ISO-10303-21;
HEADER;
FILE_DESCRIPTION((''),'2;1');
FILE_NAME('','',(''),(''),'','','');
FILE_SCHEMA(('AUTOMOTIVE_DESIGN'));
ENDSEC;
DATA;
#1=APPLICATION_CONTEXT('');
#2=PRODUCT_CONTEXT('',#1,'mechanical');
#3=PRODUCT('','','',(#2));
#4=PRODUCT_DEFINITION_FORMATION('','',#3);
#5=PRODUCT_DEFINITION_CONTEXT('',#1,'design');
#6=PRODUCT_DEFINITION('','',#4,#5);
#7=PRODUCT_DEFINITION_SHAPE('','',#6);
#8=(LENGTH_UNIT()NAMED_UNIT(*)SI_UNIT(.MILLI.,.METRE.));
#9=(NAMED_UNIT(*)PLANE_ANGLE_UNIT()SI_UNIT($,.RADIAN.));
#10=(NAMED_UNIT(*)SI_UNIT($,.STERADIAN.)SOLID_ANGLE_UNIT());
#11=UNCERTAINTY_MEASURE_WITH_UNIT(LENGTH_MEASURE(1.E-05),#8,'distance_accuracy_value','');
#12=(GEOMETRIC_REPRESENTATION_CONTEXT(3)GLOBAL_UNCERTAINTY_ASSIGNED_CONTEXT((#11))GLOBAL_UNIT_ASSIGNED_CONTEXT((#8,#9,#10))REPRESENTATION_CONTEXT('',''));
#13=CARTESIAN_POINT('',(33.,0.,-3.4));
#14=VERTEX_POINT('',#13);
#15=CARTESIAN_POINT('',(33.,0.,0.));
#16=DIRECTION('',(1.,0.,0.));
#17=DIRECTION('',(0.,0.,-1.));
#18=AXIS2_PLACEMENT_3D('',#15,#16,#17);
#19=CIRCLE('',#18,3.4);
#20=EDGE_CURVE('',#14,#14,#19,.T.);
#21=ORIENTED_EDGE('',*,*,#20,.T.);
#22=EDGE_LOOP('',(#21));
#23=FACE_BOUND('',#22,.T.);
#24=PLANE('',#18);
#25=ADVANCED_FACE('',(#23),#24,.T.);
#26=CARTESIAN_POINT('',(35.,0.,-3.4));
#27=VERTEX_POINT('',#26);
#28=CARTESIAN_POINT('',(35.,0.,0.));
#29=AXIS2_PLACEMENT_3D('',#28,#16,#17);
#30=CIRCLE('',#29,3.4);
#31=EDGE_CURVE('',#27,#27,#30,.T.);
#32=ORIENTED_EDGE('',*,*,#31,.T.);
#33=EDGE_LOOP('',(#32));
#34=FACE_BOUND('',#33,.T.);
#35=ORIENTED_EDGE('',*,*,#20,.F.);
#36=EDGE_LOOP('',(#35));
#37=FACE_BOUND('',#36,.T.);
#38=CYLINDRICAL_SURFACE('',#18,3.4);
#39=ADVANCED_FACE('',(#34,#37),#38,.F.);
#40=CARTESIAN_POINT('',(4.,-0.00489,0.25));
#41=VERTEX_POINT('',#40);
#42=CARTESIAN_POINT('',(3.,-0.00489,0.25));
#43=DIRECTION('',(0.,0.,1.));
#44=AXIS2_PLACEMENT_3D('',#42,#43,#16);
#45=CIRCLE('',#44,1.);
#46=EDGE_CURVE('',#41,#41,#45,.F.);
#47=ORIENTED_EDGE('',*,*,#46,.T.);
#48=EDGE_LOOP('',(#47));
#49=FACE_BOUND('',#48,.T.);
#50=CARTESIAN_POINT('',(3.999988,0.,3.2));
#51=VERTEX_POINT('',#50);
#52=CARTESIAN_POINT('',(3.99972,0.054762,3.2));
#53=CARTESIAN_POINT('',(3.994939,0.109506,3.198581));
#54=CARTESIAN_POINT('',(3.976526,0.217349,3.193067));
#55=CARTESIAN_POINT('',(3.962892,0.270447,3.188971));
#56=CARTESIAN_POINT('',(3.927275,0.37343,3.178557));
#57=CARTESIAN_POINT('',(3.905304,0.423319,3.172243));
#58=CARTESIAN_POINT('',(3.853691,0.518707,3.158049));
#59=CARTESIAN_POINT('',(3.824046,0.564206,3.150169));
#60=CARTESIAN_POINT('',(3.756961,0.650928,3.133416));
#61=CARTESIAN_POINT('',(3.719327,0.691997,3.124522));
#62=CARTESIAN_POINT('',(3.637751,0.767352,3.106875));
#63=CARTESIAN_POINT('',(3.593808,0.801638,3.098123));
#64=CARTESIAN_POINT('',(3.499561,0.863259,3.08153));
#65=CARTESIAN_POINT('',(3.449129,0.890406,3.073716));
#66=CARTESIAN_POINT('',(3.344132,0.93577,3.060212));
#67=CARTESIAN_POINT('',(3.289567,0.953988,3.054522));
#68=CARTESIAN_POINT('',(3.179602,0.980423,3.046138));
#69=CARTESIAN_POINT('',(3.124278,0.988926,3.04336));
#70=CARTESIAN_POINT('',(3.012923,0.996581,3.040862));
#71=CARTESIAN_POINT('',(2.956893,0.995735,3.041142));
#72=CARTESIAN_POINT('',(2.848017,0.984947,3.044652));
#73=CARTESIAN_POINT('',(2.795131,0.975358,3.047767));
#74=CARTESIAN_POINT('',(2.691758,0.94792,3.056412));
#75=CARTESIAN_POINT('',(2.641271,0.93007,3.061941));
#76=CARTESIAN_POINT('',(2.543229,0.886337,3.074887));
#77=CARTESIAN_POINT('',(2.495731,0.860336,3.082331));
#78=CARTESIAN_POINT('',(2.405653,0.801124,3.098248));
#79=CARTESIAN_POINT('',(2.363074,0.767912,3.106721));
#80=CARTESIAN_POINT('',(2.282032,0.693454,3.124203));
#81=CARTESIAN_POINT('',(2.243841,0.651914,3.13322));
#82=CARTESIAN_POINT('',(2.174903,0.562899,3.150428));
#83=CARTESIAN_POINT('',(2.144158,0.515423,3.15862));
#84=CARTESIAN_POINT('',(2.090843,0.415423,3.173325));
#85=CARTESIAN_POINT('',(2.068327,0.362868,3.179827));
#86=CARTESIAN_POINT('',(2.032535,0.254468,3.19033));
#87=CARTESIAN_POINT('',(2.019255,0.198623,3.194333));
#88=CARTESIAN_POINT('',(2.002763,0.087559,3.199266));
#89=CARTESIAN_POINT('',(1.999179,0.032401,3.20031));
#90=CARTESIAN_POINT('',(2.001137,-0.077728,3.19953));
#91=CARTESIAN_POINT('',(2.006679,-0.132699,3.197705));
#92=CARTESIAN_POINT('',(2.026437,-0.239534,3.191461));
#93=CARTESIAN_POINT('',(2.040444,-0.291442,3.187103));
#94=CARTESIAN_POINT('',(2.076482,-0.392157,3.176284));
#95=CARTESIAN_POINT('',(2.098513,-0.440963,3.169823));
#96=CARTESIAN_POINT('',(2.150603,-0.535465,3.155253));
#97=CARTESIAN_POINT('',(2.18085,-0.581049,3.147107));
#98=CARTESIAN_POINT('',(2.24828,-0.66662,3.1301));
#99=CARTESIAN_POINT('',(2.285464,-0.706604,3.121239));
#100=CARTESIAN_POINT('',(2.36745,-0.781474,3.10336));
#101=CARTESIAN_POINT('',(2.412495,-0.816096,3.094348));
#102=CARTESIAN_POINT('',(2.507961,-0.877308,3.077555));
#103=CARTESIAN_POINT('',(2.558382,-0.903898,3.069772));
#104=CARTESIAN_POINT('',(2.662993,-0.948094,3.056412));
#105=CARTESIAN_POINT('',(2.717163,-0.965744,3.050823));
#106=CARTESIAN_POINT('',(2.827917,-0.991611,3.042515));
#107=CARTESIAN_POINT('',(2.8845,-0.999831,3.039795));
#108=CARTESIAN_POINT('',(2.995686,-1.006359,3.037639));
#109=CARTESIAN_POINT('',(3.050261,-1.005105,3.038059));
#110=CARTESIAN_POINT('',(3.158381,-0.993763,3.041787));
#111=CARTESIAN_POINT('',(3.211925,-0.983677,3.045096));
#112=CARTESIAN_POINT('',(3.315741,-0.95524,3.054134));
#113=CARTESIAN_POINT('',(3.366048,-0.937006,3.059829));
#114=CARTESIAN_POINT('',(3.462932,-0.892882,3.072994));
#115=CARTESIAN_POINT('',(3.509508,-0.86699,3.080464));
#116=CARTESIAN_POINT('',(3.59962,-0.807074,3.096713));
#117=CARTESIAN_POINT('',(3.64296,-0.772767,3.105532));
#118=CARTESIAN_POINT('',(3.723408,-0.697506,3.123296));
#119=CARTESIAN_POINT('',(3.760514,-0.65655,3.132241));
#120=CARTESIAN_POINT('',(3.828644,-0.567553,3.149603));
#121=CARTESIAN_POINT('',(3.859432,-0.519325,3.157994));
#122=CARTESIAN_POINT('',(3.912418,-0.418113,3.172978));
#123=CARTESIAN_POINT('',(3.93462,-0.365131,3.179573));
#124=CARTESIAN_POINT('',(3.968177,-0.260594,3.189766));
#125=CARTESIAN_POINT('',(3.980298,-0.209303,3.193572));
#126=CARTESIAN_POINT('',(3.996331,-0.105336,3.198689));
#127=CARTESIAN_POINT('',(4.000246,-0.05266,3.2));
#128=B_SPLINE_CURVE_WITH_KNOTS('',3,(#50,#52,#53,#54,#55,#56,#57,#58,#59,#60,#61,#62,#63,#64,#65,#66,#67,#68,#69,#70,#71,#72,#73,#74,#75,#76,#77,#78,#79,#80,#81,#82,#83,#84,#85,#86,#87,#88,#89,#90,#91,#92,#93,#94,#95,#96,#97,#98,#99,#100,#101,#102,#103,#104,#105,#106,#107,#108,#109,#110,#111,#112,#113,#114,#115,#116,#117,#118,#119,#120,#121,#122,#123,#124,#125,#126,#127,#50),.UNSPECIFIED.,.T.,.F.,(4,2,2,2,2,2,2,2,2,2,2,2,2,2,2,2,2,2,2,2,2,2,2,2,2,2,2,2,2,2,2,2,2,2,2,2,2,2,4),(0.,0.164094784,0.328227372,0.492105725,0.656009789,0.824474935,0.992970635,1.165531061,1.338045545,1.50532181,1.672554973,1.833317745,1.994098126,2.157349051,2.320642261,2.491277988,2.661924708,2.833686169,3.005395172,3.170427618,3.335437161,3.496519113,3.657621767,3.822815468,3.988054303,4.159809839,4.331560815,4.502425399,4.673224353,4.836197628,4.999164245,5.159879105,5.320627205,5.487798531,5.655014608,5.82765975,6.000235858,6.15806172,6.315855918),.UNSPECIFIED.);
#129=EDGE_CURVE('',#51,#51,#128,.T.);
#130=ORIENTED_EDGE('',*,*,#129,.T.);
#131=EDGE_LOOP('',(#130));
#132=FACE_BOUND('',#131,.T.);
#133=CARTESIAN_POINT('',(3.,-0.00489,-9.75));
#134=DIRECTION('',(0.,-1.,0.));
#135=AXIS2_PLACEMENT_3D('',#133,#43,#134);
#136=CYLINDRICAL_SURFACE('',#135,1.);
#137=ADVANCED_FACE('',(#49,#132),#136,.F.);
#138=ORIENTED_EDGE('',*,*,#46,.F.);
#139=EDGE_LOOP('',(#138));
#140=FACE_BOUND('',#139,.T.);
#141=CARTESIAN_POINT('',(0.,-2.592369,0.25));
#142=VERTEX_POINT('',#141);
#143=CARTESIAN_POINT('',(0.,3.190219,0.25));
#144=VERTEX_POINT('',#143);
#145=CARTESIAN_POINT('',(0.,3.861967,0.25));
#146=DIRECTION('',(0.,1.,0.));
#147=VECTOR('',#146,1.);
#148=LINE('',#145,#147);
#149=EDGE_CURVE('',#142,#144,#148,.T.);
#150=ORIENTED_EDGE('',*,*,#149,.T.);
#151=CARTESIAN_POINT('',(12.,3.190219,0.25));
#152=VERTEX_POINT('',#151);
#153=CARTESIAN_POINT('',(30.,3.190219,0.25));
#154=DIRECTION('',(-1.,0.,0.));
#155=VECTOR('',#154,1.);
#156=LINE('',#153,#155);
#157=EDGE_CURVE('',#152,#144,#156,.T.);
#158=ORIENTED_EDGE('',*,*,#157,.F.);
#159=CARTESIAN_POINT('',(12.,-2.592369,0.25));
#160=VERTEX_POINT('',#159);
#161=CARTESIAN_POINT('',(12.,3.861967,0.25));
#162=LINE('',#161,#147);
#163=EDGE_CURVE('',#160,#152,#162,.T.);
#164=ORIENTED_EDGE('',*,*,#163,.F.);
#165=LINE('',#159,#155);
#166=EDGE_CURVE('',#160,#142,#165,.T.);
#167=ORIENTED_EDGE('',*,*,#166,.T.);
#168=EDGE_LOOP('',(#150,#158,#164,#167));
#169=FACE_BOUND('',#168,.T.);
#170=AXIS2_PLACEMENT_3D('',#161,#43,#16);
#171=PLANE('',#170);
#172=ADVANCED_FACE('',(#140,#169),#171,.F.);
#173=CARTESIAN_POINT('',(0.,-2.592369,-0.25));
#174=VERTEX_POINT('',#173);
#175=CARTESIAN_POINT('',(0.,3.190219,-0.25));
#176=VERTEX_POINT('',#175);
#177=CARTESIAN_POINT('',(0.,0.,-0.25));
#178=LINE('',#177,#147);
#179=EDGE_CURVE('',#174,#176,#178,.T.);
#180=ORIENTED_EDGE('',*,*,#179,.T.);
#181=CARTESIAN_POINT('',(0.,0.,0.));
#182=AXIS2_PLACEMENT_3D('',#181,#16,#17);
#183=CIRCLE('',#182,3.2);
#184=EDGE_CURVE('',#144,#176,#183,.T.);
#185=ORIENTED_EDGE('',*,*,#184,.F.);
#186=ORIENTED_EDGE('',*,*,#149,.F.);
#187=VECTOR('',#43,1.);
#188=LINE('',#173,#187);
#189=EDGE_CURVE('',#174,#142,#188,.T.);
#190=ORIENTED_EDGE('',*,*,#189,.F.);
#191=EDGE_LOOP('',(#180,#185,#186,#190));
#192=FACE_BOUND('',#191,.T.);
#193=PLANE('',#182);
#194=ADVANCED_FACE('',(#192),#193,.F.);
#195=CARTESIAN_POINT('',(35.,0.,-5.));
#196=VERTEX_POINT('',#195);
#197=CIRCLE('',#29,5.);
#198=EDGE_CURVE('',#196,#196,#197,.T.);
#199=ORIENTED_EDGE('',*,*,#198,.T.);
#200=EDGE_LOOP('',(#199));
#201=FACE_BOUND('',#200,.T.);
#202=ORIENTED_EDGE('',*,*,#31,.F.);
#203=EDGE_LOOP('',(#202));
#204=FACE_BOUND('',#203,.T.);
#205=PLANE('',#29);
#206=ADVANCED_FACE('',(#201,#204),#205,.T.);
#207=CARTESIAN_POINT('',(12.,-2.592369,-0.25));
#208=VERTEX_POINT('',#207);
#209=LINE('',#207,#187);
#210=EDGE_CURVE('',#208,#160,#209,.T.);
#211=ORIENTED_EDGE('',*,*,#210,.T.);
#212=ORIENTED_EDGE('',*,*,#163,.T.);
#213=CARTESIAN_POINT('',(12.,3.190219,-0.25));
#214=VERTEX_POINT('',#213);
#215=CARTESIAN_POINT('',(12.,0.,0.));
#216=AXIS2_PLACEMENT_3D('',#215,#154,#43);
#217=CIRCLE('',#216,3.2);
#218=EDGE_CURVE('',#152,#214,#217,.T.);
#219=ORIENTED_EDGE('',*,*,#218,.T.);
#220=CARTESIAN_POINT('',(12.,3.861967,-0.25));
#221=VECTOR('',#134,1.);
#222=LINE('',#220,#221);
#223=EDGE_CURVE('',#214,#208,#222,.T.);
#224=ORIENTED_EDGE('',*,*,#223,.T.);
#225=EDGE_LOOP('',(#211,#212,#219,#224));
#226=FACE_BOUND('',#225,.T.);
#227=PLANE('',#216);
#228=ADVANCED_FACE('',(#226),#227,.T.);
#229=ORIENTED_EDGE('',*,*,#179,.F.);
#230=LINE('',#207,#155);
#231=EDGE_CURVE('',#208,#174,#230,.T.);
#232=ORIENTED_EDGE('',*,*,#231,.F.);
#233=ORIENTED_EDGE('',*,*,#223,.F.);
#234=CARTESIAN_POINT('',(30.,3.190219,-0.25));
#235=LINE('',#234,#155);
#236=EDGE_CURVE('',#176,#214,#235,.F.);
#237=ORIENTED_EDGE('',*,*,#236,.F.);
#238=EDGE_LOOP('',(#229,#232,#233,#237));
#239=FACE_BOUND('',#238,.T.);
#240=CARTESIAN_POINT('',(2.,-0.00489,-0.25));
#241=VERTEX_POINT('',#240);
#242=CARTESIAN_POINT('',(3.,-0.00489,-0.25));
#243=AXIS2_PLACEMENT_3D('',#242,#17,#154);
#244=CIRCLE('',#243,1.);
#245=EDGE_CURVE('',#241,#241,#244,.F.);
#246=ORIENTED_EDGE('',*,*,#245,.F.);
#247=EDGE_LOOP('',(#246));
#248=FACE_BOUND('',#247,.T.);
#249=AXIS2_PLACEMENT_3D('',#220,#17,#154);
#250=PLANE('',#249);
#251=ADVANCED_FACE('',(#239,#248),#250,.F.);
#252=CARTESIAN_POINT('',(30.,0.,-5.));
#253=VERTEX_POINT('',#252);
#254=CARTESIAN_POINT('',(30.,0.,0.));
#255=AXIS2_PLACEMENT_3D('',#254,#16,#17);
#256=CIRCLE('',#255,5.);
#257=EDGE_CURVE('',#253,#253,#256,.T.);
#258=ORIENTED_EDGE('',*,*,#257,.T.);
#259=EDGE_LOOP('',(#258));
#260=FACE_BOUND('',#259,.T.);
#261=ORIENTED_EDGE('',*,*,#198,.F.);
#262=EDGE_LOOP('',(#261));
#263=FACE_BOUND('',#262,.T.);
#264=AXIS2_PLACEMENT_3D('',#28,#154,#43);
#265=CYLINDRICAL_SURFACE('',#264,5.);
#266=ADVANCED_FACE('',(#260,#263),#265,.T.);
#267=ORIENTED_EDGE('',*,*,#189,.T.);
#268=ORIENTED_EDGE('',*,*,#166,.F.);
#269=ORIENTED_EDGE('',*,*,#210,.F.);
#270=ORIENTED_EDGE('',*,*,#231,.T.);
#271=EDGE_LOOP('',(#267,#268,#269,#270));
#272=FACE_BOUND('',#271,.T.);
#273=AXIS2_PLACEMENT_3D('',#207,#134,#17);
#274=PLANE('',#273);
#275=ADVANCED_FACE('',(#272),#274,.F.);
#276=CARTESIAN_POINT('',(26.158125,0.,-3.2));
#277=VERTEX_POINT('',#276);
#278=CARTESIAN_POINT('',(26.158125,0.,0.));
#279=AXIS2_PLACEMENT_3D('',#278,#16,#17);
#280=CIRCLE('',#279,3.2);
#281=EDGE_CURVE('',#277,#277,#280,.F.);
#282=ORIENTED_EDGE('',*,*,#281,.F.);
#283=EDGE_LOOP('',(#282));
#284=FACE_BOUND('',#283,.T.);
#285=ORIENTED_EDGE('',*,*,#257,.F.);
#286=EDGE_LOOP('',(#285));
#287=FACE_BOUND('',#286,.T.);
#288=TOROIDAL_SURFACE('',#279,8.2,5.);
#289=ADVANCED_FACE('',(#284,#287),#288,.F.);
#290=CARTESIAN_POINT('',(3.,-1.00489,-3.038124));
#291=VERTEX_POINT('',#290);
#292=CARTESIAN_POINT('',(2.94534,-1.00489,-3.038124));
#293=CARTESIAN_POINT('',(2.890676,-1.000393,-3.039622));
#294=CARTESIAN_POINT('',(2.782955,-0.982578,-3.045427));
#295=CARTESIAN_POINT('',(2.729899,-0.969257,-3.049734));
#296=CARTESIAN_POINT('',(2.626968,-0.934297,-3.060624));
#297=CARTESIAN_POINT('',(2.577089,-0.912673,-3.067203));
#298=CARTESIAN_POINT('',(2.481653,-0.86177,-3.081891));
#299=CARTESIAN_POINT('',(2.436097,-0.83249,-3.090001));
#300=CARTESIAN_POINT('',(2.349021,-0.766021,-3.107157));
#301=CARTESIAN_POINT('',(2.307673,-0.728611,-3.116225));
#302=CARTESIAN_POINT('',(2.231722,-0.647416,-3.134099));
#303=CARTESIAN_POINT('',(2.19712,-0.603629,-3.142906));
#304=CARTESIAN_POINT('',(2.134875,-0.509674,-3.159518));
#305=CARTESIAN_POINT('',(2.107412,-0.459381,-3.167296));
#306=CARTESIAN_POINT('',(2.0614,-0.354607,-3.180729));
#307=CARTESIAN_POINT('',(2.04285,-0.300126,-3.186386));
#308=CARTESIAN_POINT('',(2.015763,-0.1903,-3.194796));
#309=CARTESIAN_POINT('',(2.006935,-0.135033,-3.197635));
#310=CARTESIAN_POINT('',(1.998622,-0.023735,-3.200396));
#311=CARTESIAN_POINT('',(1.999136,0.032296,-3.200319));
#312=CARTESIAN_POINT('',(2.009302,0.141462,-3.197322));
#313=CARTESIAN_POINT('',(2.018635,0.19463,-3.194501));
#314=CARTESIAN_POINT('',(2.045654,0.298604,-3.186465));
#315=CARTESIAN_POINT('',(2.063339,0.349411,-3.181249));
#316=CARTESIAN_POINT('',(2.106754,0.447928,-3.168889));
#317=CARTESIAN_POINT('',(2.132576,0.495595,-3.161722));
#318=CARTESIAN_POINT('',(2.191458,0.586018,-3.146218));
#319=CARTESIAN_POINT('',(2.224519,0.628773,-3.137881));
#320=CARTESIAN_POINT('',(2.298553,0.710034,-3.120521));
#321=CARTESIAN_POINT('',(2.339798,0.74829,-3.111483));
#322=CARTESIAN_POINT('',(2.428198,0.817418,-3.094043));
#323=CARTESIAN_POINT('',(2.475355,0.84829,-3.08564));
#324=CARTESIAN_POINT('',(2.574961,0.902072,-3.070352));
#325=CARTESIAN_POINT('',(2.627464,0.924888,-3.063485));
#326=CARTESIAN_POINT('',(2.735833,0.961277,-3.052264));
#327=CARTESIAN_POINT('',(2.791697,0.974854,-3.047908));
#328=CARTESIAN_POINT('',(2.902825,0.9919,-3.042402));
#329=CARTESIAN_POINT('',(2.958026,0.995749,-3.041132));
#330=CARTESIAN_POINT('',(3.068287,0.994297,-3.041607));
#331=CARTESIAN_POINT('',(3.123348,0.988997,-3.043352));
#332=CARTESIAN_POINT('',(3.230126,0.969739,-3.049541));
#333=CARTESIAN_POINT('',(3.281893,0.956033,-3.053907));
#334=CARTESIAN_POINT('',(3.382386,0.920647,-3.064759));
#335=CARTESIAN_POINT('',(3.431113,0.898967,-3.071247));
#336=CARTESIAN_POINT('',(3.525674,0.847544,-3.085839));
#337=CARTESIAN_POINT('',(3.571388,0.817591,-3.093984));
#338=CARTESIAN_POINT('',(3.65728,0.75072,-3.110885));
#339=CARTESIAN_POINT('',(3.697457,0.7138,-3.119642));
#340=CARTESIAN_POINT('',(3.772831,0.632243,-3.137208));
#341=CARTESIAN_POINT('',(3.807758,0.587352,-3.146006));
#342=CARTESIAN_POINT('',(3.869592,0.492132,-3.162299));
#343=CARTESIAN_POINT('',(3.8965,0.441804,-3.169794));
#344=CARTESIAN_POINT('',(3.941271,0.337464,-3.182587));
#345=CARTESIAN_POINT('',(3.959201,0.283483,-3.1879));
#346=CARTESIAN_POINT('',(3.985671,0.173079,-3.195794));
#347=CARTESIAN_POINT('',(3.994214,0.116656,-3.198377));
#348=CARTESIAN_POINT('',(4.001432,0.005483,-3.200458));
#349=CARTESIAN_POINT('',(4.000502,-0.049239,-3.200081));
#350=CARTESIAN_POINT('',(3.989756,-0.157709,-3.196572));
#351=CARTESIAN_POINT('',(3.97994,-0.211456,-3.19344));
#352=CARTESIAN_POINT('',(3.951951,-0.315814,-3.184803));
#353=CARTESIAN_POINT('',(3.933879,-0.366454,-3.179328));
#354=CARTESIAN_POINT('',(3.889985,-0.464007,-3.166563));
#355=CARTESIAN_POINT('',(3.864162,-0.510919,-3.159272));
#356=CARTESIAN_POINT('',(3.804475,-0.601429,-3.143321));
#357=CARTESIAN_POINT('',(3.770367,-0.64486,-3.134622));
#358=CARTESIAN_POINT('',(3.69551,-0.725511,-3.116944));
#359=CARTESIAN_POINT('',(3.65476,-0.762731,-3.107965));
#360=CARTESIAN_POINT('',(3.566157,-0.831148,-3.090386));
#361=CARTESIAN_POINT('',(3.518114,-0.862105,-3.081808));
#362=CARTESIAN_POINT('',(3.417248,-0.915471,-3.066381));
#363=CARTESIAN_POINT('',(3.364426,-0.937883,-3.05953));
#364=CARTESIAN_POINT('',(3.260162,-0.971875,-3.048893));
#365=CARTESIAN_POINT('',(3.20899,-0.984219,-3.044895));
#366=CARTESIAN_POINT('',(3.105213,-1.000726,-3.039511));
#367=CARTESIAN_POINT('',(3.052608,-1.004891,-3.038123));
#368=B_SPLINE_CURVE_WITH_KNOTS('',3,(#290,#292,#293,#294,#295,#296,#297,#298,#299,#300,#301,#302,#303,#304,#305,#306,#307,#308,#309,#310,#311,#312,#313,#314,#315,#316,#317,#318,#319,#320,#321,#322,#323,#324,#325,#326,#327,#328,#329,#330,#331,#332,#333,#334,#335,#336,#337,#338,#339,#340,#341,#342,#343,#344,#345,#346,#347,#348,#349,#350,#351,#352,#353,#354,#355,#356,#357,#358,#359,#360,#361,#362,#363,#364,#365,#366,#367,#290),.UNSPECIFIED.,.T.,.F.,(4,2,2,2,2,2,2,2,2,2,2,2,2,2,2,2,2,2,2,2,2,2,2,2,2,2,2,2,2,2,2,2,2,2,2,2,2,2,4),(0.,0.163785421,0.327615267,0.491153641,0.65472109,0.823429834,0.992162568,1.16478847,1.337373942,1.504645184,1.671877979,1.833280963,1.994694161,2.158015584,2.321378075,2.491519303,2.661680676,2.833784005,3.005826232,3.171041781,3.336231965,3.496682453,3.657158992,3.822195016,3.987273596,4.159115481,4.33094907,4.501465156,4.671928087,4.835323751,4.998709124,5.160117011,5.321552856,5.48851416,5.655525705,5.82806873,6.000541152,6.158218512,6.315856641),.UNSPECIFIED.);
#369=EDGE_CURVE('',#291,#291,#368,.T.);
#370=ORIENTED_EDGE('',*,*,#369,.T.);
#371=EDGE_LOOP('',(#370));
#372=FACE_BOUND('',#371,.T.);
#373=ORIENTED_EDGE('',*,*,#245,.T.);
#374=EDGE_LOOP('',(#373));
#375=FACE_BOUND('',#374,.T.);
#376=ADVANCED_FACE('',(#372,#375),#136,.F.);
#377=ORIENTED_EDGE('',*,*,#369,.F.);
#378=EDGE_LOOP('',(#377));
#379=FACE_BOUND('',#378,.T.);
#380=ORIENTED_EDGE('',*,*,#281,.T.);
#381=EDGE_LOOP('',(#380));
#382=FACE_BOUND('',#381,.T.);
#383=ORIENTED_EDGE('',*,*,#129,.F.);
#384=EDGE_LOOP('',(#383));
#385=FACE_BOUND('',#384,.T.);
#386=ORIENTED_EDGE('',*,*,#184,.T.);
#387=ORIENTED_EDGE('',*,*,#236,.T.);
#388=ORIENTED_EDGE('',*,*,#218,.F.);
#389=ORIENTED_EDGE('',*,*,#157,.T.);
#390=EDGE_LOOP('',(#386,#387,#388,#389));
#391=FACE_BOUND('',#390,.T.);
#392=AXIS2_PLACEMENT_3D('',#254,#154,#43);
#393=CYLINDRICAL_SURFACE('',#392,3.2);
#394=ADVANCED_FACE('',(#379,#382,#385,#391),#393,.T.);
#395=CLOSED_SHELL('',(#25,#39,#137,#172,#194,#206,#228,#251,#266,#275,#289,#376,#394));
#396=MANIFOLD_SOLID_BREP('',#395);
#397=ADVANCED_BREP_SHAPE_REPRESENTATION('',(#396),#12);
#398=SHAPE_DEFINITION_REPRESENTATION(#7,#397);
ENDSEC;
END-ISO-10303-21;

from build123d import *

# Parameters (mm, degrees)
SKETCH_1_R               = 3.2
EXTRUDE_1_DEPTH          = 30
SKETCH_2_W               = 0.5
SKETCH_2_H               = 6.454336116
CUT_EXTRUDE_1_DEPTH      = 12
CUT_EXTRUDE_2_DEPTH      = 10
CUT_EXTRUDE_2_DEPTH_BACK = 10
SKETCH_3_R               = 1
SKETCH_6_R               = 5
EXTRUDE_2_DEPTH          = 5
FILLET_1_R               = 5
SKETCH_7_R               = 3.4
CUT_EXTRUDE_3_DEPTH      = 2


with BuildPart() as part:
    # 草图1 → 凸台-拉伸1 (new body)
    with BuildSketch(Plane(origin=(0, 0, 0), x_dir=(0, 0, -1), z_dir=(1, 0, 0))):
        Circle(SKETCH_1_R)
    extrude(amount=EXTRUDE_1_DEPTH)

    # 草图2 → 切除-拉伸1 (cut)
    with BuildSketch(Plane.ZY):
        with Locations((0, 0.634798729)):
            Rectangle(SKETCH_2_W, SKETCH_2_H)
    extrude(amount=-CUT_EXTRUDE_1_DEPTH, mode=Mode.SUBTRACT)

    # 草图3 → 切除-拉伸2 (cut, two sides: drawn at the far end of the back side and taken through both)
    with BuildSketch(Plane(origin=(0, 0, 0.25), x_dir=(-1, 0, 0), z_dir=(0, 0, -1)).offset(-CUT_EXTRUDE_2_DEPTH_BACK)):
        with Locations(Location((-3, -0.004890286, 0), (0, 0, 180))):
            Circle(SKETCH_3_R)
    extrude(amount=CUT_EXTRUDE_2_DEPTH + CUT_EXTRUDE_2_DEPTH_BACK, mode=Mode.SUBTRACT)

    # 草图6 → 凸台-拉伸2 (add)
    with BuildSketch(Plane(origin=(30, 0, 0), x_dir=(0, 0, -1), z_dir=(1, 0, 0))):
        Circle(SKETCH_6_R)
    extrude(amount=EXTRUDE_2_DEPTH)

    # 圆角1
    # the kernel refuses this fillet: 5 mm, written as the material it adds along each edge
    with BuildSketch(Plane(origin=(30, 0, 0), x_dir=(0, 0, -1), z_dir=(0, -1, 0))) as fillet_1_piece_1:
        with BuildLine():
            CenterArc((8.2, -3.841874542), FILLET_1_R, 129.7918195, 50.2081805)
            Line((3.2, -3.841874542), (3.1, -3.841874542))
            Line((3.1, -3.841874542), (3.1, 0))
            Line((3.1, 0), (3.2, 0.1))
            ThreePointArc((3.2, 0.1), (4.1, 0.1), (4.936, 0.076837491))
            Line((4.936, 0.076837491), (5, 0))
        make_face()
    revolve(axis=Axis((30, 0, 0), (1, 0, 0)))

    # 草图7 → 切除-拉伸3 (cut)
    with BuildSketch(Plane(origin=(35, 0, 0), x_dir=(0, 0, -1), z_dir=(1, 0, 0))):
        Circle(SKETCH_7_R)
    extrude(amount=-CUT_EXTRUDE_3_DEPTH, mode=Mode.SUBTRACT)


solid = part.part
